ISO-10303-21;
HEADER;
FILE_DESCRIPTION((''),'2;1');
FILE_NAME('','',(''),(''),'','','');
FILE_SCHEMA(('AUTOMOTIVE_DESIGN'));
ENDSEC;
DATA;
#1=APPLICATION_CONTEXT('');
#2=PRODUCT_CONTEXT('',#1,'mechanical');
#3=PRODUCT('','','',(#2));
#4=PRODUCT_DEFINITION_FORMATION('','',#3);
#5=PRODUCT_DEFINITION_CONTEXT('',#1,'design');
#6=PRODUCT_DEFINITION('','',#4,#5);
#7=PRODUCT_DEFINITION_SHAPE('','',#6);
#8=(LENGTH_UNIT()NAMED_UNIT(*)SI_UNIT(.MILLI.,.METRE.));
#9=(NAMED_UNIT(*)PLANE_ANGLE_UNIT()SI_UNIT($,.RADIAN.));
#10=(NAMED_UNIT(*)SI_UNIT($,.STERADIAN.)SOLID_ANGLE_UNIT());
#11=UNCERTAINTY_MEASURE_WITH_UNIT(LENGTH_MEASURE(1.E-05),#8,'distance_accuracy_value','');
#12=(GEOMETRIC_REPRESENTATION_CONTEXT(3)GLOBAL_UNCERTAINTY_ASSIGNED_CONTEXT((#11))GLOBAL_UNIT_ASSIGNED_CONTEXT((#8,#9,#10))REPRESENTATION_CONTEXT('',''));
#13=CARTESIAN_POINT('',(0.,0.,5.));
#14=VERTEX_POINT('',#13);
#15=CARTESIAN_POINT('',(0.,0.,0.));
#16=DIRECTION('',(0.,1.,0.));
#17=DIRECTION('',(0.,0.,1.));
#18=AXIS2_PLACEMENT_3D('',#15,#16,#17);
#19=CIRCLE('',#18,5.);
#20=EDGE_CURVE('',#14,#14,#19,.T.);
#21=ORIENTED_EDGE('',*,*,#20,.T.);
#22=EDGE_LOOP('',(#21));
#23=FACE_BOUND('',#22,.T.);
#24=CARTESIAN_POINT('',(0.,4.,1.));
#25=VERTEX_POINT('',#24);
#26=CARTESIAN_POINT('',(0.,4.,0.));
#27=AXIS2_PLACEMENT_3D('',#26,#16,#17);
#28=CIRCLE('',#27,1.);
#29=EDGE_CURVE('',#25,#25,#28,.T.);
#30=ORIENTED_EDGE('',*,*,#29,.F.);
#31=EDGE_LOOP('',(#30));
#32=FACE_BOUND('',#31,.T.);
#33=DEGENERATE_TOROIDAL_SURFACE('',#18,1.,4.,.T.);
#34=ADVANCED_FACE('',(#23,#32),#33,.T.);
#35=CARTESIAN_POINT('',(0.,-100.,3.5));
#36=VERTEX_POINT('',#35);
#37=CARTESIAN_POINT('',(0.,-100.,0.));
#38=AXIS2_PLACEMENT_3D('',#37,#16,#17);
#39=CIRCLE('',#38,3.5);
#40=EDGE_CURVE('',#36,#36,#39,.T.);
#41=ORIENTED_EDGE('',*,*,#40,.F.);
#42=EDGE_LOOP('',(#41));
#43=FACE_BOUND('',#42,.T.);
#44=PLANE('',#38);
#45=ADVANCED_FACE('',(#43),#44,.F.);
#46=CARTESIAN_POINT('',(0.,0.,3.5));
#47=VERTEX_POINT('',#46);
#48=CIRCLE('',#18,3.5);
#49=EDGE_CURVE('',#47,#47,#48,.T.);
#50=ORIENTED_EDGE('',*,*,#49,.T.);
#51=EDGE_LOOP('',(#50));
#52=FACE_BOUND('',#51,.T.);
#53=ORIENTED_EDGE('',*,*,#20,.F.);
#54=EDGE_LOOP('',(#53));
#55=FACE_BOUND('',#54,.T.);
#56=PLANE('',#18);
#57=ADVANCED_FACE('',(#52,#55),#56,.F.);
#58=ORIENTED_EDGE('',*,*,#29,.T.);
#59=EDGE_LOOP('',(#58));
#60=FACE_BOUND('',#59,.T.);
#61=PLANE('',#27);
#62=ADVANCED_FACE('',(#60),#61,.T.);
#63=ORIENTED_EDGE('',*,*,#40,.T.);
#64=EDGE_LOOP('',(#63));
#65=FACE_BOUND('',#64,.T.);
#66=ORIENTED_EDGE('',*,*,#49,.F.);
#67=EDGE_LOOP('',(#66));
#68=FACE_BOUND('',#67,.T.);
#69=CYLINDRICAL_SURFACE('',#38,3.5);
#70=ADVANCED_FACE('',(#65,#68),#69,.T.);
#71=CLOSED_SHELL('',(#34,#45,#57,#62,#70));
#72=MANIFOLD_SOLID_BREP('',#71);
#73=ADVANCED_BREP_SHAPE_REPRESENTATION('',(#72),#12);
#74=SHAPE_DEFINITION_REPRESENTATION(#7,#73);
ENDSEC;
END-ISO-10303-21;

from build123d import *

# Parameters (mm, degrees)
SKETCH1_R           = 3.5
BOSS_EXTRUDE1_DEPTH = 100
SKETCH2_R           = 5
BOSS_EXTRUDE2_DEPTH = 4
FILLET3_R           = 4


with BuildPart() as part:
    # Sketch1 → Boss-Extrude1 (new body)
    with BuildSketch(Plane(origin=(0, 0, 0), x_dir=(1, 0, 0), z_dir=(0, 1, 0))):
        with Locations(Location((0, 0, 0), (0, 0, 270))):
            Circle(SKETCH1_R)
    extrude(amount=-BOSS_EXTRUDE1_DEPTH)

    # Sketch2 → Boss-Extrude2 (add)
    with BuildSketch(Plane(origin=(0, 0, 0), x_dir=(1, 0, 0), z_dir=(0, 1, 0))):
        with Locations(Location((0, 0, 0), (0, 0, 270))):
            Circle(SKETCH2_R)
    extrude(amount=BOSS_EXTRUDE2_DEPTH)

    # Fillet3
    fillet3_edges = [part.edges().sort_by_distance(p)[0] for p in [
        (0, 4, -5),
    ]]
    fillet(fillet3_edges, radius=FILLET3_R - 0.0001)  # a hair under: the kernel refuses the full size


solid = part.part
